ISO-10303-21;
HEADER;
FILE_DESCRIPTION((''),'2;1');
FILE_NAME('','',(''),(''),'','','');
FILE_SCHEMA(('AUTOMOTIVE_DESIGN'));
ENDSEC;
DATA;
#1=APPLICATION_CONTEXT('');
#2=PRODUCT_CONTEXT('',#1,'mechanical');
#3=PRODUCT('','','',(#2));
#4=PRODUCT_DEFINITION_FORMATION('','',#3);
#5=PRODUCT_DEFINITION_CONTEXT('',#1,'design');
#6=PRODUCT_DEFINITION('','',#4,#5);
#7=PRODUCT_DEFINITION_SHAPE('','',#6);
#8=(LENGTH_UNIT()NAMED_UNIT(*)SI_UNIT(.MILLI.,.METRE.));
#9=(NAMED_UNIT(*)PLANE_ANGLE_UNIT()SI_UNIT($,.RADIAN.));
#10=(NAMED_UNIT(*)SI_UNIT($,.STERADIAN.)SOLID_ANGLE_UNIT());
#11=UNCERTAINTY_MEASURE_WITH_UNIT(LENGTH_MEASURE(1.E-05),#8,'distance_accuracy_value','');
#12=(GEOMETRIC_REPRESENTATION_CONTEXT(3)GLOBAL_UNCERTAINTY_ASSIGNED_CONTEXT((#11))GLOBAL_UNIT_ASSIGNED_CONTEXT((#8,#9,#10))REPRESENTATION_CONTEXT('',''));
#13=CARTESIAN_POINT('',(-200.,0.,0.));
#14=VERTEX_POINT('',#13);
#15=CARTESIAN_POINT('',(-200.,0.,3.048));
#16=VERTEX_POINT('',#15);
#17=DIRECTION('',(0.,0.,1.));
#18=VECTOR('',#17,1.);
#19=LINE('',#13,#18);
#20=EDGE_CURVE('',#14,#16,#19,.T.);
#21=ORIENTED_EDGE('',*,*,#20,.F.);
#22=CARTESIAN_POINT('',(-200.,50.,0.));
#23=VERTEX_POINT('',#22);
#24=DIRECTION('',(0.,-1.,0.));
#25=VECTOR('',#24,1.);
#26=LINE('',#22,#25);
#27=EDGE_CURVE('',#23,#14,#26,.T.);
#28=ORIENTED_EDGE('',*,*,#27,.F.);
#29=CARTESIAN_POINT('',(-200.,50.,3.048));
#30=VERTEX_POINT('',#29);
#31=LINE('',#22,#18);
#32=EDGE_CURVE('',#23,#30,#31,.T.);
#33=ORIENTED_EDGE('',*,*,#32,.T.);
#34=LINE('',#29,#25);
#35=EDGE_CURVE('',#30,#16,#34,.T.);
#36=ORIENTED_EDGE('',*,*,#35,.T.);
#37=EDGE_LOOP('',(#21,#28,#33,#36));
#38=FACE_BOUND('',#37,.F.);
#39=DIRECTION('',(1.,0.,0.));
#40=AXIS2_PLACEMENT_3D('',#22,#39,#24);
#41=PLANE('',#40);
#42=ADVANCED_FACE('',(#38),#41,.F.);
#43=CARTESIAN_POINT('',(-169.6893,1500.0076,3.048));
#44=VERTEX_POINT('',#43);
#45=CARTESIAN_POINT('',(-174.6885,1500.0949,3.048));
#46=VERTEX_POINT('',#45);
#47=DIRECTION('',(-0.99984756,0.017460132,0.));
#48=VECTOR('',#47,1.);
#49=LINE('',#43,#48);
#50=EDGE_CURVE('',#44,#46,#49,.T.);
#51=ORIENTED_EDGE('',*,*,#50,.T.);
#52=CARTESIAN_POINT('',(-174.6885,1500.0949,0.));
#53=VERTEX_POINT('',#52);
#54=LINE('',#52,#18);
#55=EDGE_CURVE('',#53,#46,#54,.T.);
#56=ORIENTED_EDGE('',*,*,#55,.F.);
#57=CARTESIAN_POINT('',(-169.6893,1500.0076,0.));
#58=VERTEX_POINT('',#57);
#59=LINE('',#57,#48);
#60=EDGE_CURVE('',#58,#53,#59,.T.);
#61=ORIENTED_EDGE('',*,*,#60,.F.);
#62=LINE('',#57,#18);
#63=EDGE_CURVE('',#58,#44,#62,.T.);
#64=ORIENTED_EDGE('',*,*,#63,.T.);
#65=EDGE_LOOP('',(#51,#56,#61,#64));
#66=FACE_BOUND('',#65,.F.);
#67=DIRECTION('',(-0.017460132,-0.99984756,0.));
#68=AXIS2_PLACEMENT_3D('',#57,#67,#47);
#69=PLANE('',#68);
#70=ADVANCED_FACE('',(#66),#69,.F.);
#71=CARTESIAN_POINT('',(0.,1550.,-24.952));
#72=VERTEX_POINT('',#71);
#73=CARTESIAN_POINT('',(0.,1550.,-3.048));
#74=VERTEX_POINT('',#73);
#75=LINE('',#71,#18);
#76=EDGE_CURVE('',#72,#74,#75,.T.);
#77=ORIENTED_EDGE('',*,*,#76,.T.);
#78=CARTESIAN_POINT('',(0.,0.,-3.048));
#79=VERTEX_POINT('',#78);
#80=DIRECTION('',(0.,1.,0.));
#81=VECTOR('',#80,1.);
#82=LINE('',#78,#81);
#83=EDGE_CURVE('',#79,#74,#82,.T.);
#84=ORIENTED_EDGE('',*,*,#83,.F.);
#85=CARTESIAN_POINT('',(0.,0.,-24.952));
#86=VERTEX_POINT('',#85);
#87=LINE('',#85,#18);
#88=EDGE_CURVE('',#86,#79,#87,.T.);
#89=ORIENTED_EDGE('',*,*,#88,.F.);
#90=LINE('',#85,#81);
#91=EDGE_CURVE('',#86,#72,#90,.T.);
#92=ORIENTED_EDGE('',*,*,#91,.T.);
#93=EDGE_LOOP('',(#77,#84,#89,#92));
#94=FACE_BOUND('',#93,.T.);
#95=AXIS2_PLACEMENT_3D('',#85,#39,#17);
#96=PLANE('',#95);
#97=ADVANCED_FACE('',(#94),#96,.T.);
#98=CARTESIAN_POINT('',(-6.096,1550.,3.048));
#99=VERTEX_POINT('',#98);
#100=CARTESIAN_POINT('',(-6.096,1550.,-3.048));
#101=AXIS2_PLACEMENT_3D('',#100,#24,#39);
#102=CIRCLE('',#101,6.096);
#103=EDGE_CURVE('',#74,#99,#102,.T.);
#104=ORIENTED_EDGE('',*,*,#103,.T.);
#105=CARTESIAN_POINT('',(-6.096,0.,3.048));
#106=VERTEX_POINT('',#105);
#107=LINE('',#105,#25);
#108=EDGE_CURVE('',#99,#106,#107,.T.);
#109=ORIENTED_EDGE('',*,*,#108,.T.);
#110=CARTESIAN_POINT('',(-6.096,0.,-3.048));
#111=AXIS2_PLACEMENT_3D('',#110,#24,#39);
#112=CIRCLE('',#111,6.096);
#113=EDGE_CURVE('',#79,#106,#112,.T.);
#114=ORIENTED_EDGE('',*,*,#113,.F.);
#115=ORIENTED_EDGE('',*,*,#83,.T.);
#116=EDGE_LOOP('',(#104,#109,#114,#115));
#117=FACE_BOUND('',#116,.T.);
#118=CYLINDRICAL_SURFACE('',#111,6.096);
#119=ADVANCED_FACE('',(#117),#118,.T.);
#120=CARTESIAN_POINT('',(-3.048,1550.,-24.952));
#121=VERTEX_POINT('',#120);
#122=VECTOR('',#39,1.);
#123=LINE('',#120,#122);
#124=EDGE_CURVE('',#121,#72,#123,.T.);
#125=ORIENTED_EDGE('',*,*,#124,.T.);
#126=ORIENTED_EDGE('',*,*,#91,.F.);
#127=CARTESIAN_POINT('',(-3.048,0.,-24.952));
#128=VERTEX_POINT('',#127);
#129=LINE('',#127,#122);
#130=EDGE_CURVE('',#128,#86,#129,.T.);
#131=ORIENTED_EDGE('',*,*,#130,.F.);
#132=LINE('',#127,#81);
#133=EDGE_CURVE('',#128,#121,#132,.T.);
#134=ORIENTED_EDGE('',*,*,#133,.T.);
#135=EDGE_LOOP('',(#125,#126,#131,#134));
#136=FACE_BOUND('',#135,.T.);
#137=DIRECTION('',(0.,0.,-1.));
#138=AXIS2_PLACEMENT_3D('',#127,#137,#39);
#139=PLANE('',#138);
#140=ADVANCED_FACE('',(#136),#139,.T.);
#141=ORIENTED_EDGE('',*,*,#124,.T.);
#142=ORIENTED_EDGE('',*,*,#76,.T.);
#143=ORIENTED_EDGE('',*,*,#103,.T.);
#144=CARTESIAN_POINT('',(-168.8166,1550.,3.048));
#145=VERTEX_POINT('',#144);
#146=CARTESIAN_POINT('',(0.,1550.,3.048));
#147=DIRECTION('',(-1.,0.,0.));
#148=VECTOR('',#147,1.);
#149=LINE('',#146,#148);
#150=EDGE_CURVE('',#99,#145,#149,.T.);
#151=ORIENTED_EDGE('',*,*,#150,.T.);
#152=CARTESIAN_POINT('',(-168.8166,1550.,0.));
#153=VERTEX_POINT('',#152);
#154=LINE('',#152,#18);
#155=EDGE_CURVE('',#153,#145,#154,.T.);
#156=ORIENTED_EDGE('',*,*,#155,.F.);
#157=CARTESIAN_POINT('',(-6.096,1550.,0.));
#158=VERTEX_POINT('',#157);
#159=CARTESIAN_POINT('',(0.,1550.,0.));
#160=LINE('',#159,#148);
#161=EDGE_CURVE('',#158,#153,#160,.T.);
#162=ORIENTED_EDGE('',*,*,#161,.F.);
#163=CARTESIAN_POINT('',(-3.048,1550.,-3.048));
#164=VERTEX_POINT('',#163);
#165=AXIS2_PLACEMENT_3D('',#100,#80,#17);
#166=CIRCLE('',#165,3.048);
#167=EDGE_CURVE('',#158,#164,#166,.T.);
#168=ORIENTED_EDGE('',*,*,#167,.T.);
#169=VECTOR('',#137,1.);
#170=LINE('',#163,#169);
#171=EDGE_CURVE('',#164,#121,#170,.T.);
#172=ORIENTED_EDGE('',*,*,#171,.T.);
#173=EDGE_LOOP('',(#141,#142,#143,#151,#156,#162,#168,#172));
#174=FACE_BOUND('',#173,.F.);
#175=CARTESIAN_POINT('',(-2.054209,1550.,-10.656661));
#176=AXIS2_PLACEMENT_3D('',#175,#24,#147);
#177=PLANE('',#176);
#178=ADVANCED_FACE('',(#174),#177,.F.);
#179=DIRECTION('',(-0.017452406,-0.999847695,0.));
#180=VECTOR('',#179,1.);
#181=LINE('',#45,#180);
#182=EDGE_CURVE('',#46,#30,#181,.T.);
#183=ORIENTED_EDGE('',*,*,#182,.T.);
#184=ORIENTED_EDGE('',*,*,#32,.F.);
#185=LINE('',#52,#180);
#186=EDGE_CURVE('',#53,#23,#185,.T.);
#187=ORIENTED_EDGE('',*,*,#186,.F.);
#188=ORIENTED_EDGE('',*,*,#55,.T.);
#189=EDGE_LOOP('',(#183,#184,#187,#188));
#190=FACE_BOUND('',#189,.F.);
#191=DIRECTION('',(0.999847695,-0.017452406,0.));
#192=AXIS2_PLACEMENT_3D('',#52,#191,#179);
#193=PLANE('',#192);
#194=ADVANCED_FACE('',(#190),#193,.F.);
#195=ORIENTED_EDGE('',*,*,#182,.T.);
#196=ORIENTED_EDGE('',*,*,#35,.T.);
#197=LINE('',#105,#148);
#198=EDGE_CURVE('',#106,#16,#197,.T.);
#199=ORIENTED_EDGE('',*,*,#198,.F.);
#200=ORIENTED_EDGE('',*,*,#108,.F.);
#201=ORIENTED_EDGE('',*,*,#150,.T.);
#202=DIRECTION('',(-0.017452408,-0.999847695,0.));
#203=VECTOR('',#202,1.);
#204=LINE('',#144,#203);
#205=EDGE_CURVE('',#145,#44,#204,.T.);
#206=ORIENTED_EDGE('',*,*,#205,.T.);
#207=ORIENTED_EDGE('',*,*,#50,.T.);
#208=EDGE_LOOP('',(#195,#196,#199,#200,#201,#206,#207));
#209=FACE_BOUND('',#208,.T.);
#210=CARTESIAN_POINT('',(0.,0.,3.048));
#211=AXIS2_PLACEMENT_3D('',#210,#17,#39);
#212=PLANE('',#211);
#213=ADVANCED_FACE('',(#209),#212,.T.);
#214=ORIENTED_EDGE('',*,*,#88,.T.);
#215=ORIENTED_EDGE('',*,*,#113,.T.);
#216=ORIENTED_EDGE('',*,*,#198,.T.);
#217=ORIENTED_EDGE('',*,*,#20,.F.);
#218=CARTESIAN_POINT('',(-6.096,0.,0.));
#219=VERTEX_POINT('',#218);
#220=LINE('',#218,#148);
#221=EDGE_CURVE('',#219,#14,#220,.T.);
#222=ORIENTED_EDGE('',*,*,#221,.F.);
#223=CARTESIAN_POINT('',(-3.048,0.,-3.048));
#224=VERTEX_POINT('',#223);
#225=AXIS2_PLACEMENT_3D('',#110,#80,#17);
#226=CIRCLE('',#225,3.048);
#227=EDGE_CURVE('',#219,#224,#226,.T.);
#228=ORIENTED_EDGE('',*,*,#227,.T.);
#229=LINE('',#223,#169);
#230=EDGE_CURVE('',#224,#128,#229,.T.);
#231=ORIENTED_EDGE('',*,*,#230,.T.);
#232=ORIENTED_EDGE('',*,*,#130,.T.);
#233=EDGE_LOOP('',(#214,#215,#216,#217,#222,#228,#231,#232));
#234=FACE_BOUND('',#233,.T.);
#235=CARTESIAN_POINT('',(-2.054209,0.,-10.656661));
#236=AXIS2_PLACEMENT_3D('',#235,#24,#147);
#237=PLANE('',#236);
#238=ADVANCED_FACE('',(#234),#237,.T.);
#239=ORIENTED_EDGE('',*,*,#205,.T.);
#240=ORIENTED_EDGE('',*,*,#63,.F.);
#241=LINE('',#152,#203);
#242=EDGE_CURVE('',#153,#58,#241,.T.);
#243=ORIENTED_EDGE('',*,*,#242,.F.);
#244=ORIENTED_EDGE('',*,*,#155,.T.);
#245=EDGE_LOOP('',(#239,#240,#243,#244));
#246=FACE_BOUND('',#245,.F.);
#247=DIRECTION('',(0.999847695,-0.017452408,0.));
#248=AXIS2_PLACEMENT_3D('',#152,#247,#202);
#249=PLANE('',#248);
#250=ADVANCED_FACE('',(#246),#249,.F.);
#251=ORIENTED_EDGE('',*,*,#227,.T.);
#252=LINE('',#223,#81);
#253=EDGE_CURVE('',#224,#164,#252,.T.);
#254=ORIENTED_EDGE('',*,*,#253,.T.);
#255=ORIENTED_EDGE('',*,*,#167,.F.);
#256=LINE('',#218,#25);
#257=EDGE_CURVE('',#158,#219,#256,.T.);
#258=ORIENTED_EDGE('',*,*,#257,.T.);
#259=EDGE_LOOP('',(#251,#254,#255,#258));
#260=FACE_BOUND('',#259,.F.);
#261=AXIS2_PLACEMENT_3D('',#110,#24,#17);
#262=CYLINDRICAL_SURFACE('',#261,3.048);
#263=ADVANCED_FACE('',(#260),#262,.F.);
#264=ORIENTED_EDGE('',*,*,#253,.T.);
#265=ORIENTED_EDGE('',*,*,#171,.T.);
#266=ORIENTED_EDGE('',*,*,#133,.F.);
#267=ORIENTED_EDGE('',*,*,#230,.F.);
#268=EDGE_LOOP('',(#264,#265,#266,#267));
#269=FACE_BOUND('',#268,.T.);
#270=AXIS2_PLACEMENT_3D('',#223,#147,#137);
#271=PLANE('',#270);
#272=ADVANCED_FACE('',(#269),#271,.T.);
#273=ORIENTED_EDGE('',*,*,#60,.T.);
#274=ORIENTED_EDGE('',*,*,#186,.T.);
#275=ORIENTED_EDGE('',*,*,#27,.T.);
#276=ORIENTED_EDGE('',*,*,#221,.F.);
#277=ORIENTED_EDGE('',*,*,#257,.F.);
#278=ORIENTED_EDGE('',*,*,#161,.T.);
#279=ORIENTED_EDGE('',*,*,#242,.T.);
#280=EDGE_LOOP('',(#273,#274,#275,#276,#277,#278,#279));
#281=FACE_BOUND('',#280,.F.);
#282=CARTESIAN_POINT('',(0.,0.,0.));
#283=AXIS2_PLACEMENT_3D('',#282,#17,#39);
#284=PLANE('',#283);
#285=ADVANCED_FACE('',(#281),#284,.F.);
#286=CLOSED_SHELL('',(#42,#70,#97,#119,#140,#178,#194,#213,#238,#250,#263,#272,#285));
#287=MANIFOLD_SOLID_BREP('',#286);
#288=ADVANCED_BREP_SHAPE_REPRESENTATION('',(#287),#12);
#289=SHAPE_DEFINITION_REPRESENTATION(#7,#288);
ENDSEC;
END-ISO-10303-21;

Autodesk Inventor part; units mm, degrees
ref_plane "YZ Plane" through (0, 0, 0) normal (1, 0, 0) x (0, 1, 0)
ref_plane "XZ Plane" through (0, 0, 0) normal (0, 1, 0) x (-1, 0, 0)
ref_plane "XY Plane" through (0, 0, 0) normal (0, 0, 1) x (1, 0, 0)
sketch "Sketch1" plane through (0, 0, 0) normal (0, 0, 1) x (1, 0, 0)
  line L0 (0, 0) -> (0, 1550)
  line L1 (0, 1550) -> (-168.8166, 1550)
  line L2 (-168.8166, 1550) -> (-194.9992, 50)
  line L3 (-194.9992, 50) -> (-194.9992, 0) construction
  line L4 (-194.9992, 0) -> (0, 0)
  line L5 (-169.6893, 1500.0076) -> (-174.6885, 1500.0949)
  line L6 (-174.6885, 1500.0949) -> (-200, 50)
  line L7 (-200, 50) -> (-200, 0)
  line L8 (-200, 0) -> (-194.9992, 0)
  line L9 (-200, 50) -> (-194.9992, 50) construction
  dimension "d0" = 1550
  dimension "d1" = 168.8166
  dimension "d2" = 5
  dimension "d3" = 200
  dimension "d4" = 50
  dimension "d6" = 50
  dimension "d17" = 89
extrude "Plate1" add sketch "Sketch1" along normal blind 3.048
sketch "Sketch2" plane through (-3.048, 0, 3.048) normal (1, 0, 0) x (0, 1, 0)
  line L0 (1550, 0) -> (0, 0)
  line L1 (0, 0) -> (0, -28)
  line L2 (0, -28) -> (1550, -28)
  line L3 (1550, -28) -> (1550, 0)
edge flange "Flange1" height 28 angle 90 thickness 3.048 bend radius 3.048 thickness toward (1, 0, 0) relief tear relief width 3.048 relief depth 1.524 edges at (0, 775, 0) wall of the first edge with corners at (-3.048, 1550, 3.048) (-3.048, 0, 3.048) (-3.048, 0, -24.952) (-3.048, 1550, -24.952)
bend "Bend1"
corner "Corner1"
equation "\"d5\" = Thickness"
equation "\"d7\" = BendReliefWidth"
equation "\"d8\" = BendReliefDepth"
equation "\"d9\" = MinimumRemnant"
equation "\"d10\" = TransitionRadius"
equation "\"d13\" = BendRadius"
equation "\"d14\" = CornerReliefSize"
equation "\"d15\" = GapSize"
equation "\"d16\" = JacobiRadiusSize"
equation "\"BendRadius\" = Thickness"
equation "\"BendReliefWidth\" = Thickness"
equation "\"BendReliefDepth\" = 0.5 * Thickness"
equation "\"CornerReliefSize\" = 4 * Thickness"
equation "\"MinimumRemnant\" = 2 * Thickness"
equation "\"TransitionRadius\" = BendRadius"
equation "\"JacobiRadiusSize\" = BendRadius"
equation "\"GapSize\" = Thickness"
equation "\"Thickness\" = 3.048"
